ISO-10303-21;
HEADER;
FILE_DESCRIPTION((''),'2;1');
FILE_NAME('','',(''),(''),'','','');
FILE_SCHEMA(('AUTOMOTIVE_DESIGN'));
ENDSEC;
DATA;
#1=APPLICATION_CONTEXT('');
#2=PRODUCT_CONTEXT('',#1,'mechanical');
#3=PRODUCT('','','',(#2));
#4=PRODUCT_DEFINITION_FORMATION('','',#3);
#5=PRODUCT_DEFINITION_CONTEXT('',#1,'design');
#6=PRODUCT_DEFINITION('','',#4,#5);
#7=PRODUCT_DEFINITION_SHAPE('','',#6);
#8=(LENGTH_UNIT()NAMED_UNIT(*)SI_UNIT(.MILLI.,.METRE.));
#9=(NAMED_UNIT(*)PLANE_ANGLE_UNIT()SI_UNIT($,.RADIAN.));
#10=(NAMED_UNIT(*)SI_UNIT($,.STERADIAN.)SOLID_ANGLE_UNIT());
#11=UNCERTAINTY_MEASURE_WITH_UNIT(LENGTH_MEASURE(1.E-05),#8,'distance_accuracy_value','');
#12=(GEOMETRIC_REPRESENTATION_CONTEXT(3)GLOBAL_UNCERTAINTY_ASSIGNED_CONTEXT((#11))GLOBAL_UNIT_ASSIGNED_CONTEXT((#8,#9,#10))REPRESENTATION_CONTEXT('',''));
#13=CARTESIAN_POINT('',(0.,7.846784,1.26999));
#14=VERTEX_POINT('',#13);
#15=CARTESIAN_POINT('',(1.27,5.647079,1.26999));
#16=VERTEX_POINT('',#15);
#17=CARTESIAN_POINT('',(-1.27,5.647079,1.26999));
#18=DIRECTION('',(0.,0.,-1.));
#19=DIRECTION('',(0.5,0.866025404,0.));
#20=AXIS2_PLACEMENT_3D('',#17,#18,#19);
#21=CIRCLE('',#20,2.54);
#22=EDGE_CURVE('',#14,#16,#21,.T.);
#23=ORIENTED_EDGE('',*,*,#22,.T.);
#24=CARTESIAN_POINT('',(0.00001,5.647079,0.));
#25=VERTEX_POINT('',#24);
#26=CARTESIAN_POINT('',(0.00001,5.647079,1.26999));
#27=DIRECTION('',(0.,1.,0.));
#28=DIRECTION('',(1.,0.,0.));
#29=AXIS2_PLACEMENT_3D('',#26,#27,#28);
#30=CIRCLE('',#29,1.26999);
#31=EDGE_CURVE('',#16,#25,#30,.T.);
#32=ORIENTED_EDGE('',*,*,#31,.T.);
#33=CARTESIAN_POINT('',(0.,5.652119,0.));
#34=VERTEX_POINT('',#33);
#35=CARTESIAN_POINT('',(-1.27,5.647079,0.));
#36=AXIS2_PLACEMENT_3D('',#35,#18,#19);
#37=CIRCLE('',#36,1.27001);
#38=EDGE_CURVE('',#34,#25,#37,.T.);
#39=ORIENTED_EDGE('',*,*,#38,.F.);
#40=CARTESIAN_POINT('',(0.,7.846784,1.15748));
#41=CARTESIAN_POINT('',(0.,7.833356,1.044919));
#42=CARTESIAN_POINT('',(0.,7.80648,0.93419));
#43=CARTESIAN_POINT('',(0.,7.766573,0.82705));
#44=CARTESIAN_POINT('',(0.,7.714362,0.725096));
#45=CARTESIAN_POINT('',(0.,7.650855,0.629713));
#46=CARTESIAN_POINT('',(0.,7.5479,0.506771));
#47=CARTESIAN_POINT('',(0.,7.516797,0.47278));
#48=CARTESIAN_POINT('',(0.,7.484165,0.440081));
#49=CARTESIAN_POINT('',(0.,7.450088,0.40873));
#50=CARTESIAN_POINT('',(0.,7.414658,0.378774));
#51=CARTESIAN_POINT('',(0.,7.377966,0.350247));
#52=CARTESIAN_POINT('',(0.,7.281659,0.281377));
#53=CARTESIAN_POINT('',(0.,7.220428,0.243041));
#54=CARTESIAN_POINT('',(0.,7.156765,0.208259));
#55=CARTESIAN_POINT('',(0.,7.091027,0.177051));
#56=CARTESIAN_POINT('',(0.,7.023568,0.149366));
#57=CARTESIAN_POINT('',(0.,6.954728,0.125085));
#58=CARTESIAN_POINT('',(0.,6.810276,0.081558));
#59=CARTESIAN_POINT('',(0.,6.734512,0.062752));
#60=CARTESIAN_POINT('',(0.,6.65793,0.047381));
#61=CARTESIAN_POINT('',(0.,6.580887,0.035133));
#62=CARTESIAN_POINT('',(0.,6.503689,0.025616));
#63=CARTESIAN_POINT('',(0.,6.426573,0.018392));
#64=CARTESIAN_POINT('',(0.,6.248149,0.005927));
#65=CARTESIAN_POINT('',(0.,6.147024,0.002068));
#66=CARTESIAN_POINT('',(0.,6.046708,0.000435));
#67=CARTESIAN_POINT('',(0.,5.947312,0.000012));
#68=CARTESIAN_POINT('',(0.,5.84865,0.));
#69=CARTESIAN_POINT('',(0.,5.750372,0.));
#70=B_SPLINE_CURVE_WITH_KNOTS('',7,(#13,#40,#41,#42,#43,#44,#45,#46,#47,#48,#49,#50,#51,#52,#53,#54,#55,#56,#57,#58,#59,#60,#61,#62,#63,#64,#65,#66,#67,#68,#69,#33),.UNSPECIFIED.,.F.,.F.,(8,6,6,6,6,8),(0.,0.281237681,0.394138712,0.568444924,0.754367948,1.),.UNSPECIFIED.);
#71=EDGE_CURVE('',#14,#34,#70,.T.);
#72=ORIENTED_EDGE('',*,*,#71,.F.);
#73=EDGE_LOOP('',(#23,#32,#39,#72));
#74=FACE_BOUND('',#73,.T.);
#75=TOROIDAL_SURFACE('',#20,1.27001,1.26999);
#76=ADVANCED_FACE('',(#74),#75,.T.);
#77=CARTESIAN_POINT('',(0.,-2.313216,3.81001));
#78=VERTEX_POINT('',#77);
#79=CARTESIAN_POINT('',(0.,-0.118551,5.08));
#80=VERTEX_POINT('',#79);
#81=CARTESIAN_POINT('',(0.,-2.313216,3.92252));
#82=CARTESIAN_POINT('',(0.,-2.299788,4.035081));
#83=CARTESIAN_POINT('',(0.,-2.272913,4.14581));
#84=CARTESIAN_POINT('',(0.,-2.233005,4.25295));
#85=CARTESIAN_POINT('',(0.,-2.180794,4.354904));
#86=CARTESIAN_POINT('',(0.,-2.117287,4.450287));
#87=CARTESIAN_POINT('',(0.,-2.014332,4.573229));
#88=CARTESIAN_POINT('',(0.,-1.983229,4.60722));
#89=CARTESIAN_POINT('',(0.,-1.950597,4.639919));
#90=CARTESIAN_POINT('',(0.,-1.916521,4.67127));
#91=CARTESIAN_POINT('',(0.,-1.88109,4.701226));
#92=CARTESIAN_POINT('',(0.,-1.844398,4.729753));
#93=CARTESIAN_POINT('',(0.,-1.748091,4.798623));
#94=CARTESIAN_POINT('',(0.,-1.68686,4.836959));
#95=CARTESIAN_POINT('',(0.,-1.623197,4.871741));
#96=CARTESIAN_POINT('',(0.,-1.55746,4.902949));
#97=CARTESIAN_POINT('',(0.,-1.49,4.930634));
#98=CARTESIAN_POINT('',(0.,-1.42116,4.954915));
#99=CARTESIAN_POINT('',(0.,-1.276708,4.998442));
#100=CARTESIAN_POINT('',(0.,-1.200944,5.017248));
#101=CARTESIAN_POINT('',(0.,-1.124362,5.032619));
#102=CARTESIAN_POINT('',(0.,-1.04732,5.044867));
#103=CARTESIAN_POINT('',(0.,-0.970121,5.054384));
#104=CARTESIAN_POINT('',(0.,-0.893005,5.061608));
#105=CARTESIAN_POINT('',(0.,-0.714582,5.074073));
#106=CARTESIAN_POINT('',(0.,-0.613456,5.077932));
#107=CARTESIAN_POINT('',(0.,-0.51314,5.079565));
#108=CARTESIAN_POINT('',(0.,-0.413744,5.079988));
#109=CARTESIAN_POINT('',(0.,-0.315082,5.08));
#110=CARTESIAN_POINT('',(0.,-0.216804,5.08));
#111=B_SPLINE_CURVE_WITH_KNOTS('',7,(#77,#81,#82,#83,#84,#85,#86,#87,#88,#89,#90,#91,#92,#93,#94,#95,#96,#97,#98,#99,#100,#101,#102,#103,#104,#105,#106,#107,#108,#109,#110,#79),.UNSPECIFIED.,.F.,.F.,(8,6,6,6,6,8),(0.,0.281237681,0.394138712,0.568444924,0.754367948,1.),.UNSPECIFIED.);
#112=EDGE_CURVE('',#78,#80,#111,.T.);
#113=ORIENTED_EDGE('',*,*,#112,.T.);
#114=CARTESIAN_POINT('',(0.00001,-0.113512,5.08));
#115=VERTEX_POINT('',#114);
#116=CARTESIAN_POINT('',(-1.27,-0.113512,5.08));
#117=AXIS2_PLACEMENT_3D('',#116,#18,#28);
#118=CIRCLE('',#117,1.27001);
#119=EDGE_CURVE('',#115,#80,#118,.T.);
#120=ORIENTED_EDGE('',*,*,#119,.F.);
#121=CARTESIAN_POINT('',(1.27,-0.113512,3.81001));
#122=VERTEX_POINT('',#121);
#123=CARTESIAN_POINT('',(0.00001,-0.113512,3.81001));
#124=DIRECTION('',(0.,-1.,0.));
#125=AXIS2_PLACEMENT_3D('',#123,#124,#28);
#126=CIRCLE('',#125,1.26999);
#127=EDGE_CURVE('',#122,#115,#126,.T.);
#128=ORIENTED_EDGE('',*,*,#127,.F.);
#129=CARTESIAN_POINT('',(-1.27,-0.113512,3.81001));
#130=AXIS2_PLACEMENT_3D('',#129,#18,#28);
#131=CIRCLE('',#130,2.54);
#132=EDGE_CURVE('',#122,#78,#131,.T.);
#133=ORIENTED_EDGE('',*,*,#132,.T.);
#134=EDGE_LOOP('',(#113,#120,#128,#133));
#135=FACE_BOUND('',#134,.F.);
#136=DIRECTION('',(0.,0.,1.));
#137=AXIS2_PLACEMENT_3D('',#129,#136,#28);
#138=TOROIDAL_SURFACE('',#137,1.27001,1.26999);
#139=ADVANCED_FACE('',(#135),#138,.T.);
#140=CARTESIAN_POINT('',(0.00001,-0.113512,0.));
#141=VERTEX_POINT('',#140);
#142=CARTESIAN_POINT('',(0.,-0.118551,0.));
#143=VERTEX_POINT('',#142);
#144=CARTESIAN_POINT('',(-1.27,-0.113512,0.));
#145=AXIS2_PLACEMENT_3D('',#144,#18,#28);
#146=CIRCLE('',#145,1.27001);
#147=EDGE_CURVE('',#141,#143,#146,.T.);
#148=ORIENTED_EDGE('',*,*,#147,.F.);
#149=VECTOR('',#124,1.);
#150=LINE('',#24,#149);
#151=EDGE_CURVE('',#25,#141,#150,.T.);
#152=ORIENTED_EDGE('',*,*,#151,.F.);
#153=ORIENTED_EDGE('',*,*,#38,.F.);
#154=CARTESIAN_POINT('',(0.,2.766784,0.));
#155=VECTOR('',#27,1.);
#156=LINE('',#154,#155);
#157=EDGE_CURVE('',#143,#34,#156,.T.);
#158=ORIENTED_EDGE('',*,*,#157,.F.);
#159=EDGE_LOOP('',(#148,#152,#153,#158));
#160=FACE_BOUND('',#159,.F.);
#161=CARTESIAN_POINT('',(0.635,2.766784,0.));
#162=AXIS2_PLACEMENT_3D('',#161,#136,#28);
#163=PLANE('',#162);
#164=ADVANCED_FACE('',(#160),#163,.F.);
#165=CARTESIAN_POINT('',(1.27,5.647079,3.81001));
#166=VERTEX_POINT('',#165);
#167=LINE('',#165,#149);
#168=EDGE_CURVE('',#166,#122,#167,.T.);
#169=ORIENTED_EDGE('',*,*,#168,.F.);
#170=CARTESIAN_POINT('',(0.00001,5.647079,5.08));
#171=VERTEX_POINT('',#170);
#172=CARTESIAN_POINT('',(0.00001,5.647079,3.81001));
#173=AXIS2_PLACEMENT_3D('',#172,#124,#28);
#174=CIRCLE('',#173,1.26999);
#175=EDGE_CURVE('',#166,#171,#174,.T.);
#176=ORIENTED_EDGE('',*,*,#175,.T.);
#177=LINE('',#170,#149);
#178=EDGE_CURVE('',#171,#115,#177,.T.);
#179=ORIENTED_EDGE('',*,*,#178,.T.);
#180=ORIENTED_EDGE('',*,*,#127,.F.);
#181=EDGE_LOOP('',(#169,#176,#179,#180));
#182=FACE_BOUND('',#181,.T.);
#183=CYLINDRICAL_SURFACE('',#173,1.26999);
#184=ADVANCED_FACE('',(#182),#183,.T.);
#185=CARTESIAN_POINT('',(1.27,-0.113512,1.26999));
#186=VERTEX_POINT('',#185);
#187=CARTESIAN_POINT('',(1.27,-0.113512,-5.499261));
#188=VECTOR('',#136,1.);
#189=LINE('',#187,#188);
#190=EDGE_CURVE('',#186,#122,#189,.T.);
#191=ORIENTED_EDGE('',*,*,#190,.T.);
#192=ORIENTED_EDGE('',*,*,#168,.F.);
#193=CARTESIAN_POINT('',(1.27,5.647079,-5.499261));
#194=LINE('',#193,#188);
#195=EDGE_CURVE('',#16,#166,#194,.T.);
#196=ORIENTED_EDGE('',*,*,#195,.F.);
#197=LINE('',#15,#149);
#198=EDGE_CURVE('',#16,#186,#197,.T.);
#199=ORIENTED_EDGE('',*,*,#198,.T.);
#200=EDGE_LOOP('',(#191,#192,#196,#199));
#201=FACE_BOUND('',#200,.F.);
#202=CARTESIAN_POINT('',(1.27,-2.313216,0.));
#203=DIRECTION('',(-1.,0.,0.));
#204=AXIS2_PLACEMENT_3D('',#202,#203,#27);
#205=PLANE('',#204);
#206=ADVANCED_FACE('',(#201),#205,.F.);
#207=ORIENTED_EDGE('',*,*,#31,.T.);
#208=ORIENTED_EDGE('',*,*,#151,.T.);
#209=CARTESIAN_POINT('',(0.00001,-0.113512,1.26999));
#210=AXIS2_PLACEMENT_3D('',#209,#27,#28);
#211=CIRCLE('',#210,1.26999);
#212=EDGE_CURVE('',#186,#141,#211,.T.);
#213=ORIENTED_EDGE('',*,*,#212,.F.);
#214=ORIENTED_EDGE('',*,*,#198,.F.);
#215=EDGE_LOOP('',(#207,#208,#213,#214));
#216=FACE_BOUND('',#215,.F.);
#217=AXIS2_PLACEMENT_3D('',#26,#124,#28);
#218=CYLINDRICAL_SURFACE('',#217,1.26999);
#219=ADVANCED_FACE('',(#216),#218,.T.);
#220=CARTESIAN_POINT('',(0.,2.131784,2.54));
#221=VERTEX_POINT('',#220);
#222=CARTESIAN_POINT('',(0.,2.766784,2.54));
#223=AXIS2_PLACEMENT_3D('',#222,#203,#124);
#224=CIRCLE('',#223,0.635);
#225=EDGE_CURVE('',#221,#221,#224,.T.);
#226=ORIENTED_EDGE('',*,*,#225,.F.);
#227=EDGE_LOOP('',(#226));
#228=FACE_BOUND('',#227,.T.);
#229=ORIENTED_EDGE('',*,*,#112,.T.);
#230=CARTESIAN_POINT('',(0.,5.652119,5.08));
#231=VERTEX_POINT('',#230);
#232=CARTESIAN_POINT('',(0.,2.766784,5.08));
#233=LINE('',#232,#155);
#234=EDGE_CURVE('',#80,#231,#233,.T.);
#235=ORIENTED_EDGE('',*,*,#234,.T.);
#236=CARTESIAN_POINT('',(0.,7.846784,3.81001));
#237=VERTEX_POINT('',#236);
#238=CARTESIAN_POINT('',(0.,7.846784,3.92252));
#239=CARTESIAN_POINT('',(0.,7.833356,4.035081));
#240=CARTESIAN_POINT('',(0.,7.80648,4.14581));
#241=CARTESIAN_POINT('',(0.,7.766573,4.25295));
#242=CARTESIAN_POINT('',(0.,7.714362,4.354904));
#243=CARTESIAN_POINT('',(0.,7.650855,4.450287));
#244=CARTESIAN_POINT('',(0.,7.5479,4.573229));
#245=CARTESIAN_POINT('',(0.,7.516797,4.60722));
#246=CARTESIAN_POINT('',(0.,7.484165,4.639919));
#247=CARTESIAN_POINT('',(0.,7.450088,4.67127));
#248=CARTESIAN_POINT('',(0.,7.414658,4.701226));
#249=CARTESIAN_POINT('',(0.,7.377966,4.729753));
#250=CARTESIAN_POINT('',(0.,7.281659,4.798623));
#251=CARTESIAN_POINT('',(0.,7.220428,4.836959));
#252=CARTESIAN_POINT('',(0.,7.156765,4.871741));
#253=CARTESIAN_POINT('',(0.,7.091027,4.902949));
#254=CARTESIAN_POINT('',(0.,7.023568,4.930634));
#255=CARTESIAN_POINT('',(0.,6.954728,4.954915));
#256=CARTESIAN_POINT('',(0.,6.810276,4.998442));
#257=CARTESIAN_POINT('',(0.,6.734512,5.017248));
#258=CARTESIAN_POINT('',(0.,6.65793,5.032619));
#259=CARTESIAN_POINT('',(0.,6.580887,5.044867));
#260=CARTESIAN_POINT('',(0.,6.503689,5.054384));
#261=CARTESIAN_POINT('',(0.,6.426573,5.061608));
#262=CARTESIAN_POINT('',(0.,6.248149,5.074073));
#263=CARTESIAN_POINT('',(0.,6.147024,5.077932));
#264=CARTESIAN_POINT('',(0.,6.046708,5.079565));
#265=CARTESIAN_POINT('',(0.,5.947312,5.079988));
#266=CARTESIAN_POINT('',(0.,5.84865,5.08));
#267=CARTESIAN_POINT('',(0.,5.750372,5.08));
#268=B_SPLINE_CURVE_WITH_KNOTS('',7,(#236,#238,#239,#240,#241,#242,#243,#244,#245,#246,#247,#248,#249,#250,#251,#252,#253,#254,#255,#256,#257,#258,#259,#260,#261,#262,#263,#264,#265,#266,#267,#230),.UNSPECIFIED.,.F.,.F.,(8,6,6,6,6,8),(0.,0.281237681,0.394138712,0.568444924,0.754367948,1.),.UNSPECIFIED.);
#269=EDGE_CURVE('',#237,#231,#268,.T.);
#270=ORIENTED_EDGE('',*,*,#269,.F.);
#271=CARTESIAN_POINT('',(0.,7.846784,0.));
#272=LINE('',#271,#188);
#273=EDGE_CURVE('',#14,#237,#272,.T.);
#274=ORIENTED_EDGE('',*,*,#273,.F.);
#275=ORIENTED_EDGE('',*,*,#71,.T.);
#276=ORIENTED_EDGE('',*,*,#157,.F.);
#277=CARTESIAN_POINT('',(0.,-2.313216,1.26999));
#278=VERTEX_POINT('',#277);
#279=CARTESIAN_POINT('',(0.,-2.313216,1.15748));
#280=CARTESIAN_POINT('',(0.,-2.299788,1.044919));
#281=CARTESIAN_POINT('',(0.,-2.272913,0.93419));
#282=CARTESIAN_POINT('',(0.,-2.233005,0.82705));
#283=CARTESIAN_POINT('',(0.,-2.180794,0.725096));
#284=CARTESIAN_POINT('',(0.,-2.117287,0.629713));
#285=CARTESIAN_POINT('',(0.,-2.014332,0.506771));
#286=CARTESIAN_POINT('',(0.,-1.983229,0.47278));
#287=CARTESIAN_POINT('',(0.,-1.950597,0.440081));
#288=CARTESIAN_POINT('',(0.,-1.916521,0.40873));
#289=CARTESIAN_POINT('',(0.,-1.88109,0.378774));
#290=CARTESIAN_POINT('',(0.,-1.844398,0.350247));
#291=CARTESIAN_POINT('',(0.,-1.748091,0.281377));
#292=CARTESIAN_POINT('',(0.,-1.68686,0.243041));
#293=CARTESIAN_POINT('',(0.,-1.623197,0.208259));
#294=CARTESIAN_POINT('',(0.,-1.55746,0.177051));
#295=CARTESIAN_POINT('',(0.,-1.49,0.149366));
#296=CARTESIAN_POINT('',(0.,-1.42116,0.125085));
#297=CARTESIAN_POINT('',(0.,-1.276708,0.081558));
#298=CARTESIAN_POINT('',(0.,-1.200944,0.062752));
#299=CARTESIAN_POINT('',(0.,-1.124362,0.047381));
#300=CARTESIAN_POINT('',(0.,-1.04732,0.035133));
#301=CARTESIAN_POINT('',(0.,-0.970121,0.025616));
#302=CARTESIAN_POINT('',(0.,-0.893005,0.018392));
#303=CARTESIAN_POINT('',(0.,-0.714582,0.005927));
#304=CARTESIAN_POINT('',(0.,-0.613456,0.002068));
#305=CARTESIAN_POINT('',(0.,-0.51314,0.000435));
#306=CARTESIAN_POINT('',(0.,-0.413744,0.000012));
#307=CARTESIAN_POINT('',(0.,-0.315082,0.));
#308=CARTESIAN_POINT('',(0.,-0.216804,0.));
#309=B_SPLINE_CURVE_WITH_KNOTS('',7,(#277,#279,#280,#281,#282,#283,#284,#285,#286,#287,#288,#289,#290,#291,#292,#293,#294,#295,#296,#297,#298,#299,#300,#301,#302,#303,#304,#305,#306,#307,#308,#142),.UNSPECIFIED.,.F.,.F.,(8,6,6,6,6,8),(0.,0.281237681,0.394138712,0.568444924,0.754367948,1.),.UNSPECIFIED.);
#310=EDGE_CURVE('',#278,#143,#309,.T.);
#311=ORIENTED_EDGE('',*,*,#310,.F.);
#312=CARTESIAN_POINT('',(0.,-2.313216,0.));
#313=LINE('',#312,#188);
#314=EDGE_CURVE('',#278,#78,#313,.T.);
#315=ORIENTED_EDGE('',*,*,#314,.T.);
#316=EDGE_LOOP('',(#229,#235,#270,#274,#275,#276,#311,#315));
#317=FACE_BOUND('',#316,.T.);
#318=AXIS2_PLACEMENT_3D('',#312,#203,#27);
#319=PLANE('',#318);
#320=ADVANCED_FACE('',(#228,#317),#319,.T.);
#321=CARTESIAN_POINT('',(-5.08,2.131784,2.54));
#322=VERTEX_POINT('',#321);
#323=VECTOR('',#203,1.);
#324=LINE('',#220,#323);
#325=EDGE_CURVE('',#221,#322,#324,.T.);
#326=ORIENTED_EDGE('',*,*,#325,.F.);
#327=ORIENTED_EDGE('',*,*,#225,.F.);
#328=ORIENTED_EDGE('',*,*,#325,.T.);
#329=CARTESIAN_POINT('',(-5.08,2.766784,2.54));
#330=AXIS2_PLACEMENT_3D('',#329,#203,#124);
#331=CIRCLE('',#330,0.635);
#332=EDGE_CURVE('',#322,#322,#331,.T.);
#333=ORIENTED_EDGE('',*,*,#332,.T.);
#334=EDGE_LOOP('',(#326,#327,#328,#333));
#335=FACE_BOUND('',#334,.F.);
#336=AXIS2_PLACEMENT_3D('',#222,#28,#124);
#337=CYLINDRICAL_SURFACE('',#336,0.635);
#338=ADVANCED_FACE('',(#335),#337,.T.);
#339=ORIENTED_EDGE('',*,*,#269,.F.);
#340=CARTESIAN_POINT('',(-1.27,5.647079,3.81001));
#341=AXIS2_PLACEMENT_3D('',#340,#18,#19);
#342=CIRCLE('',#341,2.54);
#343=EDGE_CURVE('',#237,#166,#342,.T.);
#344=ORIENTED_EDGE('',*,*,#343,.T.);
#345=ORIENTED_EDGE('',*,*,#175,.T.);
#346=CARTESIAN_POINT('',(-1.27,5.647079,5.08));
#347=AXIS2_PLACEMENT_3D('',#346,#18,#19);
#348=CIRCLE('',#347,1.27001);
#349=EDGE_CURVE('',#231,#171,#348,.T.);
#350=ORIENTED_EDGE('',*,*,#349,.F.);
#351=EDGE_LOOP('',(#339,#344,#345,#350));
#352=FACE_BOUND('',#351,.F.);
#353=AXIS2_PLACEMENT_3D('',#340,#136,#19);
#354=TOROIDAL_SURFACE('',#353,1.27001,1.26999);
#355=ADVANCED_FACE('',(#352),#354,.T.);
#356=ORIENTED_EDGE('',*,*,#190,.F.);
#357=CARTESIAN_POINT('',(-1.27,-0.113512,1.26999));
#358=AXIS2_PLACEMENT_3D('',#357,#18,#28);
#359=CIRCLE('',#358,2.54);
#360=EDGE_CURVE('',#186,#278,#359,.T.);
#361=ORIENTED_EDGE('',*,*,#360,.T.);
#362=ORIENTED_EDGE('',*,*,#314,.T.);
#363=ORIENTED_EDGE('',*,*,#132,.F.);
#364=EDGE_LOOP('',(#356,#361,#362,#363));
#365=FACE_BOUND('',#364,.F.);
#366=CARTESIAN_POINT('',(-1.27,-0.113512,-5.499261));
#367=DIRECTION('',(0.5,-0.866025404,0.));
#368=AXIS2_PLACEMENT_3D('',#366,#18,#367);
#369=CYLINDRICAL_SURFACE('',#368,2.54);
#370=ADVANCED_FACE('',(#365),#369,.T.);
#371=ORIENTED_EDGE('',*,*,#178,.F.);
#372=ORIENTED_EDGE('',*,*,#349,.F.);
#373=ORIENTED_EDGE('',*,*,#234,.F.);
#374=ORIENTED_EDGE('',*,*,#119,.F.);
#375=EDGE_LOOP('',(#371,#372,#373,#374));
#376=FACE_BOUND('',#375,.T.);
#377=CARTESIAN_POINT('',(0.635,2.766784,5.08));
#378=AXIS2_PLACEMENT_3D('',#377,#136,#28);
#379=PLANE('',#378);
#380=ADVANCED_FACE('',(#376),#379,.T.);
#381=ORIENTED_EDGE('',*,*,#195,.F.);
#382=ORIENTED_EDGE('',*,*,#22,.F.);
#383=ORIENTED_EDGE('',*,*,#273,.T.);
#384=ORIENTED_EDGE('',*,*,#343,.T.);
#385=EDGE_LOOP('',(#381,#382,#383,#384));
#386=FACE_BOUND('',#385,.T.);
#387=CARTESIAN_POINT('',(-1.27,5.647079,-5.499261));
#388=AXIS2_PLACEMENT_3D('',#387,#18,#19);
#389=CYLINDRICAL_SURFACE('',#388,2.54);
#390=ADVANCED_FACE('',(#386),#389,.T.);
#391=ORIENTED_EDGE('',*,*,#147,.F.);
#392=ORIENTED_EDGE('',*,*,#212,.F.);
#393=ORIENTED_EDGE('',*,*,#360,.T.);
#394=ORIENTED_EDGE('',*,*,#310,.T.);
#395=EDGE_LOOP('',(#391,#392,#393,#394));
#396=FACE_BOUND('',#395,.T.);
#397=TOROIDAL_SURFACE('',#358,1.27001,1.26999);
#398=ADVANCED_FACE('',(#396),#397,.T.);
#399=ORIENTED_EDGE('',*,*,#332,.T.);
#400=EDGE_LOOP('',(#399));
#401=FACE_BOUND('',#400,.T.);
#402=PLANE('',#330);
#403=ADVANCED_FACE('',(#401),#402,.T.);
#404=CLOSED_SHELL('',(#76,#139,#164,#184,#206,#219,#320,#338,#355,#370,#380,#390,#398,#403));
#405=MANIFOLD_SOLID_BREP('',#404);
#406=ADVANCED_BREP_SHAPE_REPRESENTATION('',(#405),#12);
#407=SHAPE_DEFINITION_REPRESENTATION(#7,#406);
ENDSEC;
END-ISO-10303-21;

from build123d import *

# Parameters (mm, degrees)
F0_W        = 1.27
F0_H        = 10.16
F1_DEPTH    = 5.08
F2_T1_DEPTH = 16.0785226281
F3_R        = 1.26999
F4_R        = 0.635
F5_DEPTH    = 5.08


# Not quite as in the source:
# - a fillet or chamfer that OpenCascade refuses, or shapes differently, is made with other operations: its cross-section is extruded or revolved along the edge and cut away or added
# - a fillet or chamfer is up to 0.001 mm smaller than in the source, because OpenCascade refuses the exact size


with BuildPart() as f1:
    # F0 (on Top) → F1 (new body)
    with BuildSketch(Plane.XY):
        with Locations((0.635, 2.7667839336)):
            Rectangle(F0_W, F0_H)
    extrude(amount=F1_DEPTH)

    # F2: fillet of radius 2.54 on 2 edges, made by hand

    # F2_s2 → F2_t1 (cut)
    with BuildSketch(Plane.XY.offset(-5.499261314)):
        with BuildLine():
            ThreePointArc((0, 7.8467839336), (0.9297045256, 6.9170794079), (1.27, 5.6470794079))
            Line((1.27, 5.6470794079), (1.27, 7.8467839336))
            Line((1.27, 7.8467839336), (0, 7.8467839336))
        make_face()
        with BuildLine():
            ThreePointArc((0, -2.3132160664), (0.9297045256, -1.3835115408), (1.27, -0.1135115408))
            Line((1.27, -0.1135115408), (1.27, -2.3132160664))
            Line((1.27, -2.3132160664), (0, -2.3132160664))
        make_face()
    extrude(amount=F2_T1_DEPTH, mode=Mode.SUBTRACT)

    # F3 (radius 1.27 in the source; OpenCascade refuses exactly that, so slightly less here)
    f3_edges = [f1.edges().sort_by_distance(p)[0] for p in [
        (0.929705, 6.917079, 5.08),
        (1.27, 2.766784, 5.08),
        (0.929705, -1.383512, 5.08),
        (0.929705, 6.917079, 0),
        (0.929705, -1.383512, 0),
        (1.27, 2.766784, 0),
    ]]
    fillet(f3_edges, radius=F3_R)

    # F4 (on face) → F5 (join)
    with BuildSketch(Plane(origin=(0, 0, 0), x_dir=(0, -1, 0), z_dir=(-1, 0, 0))):
        with Locations((-2.7667839336, 2.54)):
            Circle(F4_R)
    extrude(amount=F5_DEPTH)


solid = f1.part
